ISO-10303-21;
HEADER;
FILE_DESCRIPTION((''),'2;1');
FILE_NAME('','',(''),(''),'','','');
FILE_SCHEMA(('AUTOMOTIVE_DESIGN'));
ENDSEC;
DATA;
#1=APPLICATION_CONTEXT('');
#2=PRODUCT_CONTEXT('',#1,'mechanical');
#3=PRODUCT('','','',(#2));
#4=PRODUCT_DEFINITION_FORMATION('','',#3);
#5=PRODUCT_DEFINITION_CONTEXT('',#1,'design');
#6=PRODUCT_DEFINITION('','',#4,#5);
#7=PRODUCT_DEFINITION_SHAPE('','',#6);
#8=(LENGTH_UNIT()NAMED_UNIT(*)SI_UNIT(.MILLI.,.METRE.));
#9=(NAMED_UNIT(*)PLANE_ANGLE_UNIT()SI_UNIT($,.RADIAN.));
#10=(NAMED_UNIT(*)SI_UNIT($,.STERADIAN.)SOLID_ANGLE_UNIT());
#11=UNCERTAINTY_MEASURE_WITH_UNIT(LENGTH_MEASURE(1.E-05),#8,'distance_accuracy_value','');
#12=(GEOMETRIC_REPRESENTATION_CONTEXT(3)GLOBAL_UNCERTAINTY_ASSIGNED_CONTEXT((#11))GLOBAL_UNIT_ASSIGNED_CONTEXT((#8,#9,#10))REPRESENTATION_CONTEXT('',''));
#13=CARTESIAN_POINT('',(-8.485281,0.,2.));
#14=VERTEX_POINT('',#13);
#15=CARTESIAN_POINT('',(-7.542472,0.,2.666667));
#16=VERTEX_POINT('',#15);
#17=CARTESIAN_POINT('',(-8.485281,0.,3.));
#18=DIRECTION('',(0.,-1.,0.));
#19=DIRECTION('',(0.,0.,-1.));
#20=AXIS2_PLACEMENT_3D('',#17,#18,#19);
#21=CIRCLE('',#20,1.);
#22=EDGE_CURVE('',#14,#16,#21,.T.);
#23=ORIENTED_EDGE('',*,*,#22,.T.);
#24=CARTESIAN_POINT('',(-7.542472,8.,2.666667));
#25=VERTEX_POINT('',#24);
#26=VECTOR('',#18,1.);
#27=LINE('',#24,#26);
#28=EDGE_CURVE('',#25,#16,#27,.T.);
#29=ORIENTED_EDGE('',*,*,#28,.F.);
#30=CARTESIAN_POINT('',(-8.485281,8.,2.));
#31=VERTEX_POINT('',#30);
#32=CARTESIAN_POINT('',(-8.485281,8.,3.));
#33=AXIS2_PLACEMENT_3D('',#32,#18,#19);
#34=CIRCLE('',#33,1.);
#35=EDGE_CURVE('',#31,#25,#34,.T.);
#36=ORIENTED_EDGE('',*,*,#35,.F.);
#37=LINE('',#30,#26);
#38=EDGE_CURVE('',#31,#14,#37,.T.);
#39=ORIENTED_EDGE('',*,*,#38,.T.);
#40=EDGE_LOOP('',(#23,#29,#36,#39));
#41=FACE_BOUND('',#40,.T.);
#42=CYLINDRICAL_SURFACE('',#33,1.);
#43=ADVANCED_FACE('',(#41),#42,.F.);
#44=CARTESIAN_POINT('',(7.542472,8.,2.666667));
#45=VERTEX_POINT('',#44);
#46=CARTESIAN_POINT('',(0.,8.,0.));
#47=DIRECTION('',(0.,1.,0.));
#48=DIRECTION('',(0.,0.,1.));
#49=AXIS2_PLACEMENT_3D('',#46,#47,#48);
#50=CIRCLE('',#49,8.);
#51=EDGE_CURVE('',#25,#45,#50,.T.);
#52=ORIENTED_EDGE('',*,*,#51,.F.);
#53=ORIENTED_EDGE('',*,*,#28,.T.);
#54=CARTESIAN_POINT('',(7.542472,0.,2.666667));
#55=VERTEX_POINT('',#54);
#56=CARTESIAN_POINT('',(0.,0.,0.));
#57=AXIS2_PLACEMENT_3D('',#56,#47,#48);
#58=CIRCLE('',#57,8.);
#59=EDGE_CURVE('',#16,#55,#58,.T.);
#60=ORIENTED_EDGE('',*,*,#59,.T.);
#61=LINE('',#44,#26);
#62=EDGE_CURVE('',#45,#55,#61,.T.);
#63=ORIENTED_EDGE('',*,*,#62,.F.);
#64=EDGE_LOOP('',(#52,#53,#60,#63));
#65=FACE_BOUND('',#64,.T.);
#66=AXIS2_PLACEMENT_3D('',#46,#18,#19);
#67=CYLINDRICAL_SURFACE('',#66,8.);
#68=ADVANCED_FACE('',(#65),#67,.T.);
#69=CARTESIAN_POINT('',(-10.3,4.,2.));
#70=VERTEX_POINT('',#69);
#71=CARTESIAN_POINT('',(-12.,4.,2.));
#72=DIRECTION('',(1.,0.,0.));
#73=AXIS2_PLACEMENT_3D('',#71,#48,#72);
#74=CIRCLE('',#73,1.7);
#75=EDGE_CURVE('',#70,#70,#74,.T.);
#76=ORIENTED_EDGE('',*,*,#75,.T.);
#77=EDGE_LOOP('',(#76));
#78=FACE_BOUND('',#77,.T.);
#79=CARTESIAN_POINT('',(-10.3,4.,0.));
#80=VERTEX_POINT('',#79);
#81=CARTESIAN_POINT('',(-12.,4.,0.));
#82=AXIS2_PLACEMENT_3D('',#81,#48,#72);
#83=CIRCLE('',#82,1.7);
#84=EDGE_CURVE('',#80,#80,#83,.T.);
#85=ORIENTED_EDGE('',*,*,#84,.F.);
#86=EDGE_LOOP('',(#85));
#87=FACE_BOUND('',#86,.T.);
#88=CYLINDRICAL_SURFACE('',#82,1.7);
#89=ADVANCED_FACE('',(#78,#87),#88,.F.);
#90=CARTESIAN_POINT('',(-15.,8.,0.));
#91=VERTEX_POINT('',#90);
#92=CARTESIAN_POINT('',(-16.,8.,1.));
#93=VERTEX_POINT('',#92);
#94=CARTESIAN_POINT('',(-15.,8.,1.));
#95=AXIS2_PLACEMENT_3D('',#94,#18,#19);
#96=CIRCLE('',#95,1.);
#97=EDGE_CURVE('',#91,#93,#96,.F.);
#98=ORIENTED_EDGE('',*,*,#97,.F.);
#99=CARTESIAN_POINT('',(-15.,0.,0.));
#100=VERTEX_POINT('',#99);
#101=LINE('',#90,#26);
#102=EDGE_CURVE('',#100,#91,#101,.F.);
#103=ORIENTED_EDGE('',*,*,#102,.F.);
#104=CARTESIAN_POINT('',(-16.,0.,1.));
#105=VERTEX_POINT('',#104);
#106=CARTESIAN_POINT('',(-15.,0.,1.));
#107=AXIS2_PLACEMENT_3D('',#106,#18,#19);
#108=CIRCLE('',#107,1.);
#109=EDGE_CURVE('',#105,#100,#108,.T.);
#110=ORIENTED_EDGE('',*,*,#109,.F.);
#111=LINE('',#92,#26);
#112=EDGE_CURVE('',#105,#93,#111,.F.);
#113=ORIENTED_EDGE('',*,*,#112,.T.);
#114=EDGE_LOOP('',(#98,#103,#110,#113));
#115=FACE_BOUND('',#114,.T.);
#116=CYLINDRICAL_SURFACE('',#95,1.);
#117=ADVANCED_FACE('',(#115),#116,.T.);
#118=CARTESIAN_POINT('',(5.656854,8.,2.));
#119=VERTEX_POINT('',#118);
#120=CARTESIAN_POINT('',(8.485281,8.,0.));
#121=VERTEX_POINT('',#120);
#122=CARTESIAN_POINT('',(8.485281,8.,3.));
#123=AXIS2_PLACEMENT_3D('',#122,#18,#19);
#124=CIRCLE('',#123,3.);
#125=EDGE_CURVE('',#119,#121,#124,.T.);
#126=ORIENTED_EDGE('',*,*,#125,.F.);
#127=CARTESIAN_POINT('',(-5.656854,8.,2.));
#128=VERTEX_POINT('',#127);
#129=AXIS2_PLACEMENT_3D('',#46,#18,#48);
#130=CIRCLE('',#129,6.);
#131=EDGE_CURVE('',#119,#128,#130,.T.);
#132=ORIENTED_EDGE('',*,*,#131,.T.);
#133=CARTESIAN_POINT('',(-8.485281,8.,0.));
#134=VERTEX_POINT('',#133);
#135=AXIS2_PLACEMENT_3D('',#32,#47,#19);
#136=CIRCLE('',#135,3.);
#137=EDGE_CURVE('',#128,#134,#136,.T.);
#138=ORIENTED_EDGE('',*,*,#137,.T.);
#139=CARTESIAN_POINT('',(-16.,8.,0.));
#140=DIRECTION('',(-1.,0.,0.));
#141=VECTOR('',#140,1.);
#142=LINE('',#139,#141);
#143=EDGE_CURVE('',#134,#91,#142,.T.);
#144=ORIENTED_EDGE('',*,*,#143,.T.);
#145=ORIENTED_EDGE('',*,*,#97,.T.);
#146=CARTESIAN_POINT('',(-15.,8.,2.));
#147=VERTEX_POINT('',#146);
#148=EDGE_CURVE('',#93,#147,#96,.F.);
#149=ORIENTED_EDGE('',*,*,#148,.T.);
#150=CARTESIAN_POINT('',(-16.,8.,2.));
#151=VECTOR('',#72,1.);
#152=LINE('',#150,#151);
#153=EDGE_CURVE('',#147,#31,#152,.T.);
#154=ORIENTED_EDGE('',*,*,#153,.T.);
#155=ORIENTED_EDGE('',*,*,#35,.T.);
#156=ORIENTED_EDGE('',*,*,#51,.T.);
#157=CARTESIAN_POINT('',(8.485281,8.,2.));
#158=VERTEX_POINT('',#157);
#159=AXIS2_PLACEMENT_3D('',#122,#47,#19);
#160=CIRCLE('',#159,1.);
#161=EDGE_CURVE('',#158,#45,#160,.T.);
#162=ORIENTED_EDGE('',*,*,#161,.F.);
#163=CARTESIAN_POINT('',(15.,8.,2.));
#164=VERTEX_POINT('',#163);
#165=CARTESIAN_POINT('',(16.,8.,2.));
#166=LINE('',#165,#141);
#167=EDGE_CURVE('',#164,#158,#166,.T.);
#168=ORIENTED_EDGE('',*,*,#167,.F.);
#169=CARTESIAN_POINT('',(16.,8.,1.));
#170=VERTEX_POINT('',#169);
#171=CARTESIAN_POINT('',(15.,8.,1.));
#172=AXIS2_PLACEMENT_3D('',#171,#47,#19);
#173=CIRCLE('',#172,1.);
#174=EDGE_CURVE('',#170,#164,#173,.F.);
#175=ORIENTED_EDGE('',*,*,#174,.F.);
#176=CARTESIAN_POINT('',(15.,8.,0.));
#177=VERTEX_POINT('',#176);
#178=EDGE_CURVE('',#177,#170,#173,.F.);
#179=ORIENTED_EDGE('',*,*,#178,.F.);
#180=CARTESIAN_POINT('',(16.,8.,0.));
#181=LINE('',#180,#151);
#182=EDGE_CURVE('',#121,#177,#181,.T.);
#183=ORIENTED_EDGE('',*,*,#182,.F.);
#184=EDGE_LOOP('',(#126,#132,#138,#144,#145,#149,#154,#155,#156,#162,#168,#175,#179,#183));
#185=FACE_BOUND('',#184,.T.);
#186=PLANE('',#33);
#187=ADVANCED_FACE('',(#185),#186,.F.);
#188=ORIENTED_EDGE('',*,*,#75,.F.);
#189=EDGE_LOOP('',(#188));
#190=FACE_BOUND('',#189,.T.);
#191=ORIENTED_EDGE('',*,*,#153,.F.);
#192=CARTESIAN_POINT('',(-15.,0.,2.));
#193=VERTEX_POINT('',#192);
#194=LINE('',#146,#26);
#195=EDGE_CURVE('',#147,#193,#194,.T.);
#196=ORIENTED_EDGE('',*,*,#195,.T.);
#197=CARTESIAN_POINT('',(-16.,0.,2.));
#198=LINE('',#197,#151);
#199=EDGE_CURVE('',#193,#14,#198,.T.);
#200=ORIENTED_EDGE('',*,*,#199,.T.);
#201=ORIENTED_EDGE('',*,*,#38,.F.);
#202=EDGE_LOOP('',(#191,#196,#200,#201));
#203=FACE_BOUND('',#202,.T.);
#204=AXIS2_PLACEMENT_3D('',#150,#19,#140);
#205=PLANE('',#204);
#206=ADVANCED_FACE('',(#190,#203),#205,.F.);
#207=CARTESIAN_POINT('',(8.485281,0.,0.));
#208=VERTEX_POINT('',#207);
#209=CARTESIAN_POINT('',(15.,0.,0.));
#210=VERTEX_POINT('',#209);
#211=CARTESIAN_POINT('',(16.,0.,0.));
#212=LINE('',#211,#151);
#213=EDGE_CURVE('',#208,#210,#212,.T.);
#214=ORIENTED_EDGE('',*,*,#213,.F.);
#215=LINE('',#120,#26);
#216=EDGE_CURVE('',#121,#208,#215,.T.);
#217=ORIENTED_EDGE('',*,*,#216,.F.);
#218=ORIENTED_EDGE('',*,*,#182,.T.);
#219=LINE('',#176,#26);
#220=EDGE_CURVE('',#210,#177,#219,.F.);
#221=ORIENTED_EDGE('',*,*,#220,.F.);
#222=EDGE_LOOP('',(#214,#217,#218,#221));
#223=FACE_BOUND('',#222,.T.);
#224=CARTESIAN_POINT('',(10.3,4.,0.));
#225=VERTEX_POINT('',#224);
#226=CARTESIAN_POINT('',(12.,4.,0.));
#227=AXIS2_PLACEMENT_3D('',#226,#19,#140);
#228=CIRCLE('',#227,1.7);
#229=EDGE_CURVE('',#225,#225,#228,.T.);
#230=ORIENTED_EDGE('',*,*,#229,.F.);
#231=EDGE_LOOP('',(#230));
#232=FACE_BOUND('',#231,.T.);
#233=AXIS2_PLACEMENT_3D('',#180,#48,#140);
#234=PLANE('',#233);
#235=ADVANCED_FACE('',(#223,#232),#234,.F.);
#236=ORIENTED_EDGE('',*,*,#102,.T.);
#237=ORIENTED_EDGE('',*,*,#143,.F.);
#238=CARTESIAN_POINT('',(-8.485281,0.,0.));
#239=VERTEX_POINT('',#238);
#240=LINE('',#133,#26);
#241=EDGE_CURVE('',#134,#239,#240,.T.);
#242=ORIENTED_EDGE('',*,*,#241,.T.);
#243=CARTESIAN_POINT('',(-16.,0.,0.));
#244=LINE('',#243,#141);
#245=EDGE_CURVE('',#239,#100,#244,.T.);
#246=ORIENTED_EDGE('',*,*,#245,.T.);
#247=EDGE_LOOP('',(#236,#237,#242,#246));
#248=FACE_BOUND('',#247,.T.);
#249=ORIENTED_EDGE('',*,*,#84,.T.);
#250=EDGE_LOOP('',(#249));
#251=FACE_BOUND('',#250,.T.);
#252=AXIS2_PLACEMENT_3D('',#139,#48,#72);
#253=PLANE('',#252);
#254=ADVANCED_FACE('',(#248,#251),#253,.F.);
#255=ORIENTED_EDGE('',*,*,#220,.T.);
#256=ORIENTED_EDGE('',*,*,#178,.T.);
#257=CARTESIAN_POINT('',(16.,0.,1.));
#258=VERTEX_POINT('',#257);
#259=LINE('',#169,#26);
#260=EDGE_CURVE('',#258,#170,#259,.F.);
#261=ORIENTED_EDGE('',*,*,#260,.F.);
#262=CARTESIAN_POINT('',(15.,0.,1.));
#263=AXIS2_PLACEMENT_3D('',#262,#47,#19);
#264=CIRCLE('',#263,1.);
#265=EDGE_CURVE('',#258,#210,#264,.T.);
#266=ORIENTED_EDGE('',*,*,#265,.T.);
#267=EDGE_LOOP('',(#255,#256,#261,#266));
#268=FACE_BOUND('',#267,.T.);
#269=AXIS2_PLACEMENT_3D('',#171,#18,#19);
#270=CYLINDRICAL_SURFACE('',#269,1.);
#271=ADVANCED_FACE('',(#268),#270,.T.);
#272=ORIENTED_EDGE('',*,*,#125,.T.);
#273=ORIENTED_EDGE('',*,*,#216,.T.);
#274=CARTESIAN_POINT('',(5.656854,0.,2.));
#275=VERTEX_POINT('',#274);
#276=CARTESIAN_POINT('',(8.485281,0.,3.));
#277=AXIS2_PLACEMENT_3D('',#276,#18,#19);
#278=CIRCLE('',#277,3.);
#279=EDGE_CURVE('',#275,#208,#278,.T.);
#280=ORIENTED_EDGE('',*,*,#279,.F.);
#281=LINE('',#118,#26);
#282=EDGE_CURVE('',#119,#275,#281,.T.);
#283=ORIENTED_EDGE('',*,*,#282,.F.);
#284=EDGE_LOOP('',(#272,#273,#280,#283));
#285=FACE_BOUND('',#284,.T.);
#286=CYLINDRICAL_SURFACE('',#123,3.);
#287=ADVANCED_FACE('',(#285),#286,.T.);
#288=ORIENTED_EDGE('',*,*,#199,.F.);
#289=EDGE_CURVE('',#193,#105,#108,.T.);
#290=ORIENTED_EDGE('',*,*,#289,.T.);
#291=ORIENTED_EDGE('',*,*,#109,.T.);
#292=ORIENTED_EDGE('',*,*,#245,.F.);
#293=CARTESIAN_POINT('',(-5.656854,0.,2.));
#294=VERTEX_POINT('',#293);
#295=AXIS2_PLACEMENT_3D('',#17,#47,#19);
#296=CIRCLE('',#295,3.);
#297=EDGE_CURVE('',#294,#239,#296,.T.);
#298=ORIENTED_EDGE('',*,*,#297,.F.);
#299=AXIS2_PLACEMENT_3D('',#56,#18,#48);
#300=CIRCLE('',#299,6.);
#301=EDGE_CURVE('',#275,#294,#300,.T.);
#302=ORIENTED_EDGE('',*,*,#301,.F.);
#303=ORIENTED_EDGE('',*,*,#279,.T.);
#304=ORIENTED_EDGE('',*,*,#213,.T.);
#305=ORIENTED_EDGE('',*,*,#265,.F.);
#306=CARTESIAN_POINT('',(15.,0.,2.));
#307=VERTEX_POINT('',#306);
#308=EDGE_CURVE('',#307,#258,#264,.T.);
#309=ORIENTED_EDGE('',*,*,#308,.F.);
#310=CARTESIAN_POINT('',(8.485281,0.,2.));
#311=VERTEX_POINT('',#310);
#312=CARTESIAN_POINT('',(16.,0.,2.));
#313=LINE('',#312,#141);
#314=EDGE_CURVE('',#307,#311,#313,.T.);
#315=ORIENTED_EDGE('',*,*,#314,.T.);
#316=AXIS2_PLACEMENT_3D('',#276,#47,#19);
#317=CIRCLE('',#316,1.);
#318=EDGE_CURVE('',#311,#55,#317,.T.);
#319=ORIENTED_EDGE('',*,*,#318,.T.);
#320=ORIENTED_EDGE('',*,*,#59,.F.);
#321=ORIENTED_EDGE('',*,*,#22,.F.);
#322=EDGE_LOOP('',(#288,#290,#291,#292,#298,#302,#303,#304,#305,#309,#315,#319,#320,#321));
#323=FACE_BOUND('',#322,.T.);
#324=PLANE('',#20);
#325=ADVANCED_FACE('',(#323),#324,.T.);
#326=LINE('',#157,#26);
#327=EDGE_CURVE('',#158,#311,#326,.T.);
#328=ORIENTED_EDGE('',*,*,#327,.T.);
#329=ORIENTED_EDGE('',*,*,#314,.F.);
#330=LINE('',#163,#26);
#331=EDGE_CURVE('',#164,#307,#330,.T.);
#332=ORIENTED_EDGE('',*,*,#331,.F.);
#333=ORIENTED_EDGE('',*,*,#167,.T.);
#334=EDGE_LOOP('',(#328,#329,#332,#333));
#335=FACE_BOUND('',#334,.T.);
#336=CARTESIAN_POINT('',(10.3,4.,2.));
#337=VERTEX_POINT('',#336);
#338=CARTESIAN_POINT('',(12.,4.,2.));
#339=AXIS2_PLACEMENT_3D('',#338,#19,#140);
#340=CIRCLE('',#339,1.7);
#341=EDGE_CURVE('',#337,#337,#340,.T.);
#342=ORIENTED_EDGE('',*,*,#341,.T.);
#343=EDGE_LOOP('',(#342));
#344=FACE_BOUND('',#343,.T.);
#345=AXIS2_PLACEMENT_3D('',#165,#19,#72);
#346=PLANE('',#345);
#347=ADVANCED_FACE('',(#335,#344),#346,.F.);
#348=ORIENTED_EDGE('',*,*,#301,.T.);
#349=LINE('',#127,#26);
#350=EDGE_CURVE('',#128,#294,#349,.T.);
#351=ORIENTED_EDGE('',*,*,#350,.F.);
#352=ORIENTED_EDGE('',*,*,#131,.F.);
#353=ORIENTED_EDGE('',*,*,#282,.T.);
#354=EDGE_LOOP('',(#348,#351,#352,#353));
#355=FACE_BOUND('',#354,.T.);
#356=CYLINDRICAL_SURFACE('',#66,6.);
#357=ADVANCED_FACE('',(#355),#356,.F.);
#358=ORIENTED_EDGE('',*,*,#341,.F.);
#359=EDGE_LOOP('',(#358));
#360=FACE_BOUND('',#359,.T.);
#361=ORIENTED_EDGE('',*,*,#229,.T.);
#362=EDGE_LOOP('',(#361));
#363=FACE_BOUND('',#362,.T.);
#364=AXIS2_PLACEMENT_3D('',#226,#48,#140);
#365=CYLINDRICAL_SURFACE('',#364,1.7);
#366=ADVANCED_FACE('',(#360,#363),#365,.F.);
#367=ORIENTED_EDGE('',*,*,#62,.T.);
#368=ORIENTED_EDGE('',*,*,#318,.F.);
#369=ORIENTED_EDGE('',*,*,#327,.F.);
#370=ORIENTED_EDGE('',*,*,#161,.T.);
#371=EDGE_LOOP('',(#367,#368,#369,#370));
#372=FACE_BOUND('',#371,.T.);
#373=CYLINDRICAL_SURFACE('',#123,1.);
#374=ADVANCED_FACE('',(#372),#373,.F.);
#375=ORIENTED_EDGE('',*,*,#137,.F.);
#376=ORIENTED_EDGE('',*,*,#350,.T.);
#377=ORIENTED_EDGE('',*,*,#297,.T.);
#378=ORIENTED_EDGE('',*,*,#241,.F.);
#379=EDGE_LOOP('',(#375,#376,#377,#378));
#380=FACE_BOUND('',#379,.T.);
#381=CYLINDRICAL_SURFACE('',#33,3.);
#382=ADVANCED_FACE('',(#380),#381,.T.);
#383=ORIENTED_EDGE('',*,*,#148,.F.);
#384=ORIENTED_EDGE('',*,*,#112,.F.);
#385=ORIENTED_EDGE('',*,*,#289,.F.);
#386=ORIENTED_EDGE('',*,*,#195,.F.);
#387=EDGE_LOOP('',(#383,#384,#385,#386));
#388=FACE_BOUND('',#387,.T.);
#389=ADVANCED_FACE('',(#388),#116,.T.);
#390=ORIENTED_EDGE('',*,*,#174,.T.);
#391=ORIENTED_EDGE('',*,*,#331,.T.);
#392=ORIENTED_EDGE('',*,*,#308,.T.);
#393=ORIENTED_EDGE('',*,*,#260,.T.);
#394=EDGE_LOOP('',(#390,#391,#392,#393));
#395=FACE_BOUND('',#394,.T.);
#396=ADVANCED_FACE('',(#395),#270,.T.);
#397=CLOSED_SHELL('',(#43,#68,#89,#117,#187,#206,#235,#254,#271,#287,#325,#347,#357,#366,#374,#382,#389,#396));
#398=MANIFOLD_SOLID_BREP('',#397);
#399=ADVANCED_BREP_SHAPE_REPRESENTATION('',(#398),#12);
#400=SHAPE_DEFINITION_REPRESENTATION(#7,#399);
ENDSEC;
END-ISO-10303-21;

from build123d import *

# Parameters (mm, degrees)
BOSS_EXTRUDE1_DEPTH = 8
SKETCH2_R           = 1.7
CUT_EXTRUDE1_DEPTH  = 19.867962264
FILLET1_R           = 1


with BuildPart() as part:
    # Sketch1 → Boss-Extrude1 (new body)
    with BuildSketch(Plane(origin=(0, 0, 0), x_dir=(1, 0, 0), z_dir=(0, 1, 0))):
        with BuildLine():
            Line((-16, 0), (-8.485281374, 0))
            ThreePointArc((-8.485281374, 0), (-6.753230567, -0.550510257), (-5.656854249, -2))
            ThreePointArc((-5.656854249, -2), (-3.464101615, -4.898979486), (0, -6))
            Line((0, -6), (0, -8))
            ThreePointArc((0, -8), (-4.618802154, -6.531972647), (-7.542472333, -2.666666667))
            ThreePointArc((-7.542472333, -2.666666667), (-7.907931105, -2.183503419), (-8.485281374, -2))
            Line((-8.485281374, -2), (-16, -2))
            Line((-16, -2), (-16, 0))
        make_face()
    extrude(amount=BOSS_EXTRUDE1_DEPTH)

    # Sketch2 → Cut-Extrude1 (cut, through all)
    with BuildSketch(Plane.XY.offset(2)):
        with Locations((-12, 4)):
            Circle(SKETCH2_R)
    extrude(amount=-CUT_EXTRUDE1_DEPTH, mode=Mode.SUBTRACT)

    # Fillet1
    fillet1_edges = [part.edges().sort_by_distance(p)[0] for p in [
        (-16, 4, 0),
        (-16, 4, 2),
    ]]
    fillet(fillet1_edges, radius=FILLET1_R - 0.0001)  # a hair under: the kernel refuses the full size

    # Mirror1: part across plane


with BuildPart() as part_1:
    add(part.part)
    add(part.part.mirror(Plane(origin=(0, 8, 6), x_dir=(0, 0, 1), z_dir=(-1, 0, 0))))


solid = part_1.part
